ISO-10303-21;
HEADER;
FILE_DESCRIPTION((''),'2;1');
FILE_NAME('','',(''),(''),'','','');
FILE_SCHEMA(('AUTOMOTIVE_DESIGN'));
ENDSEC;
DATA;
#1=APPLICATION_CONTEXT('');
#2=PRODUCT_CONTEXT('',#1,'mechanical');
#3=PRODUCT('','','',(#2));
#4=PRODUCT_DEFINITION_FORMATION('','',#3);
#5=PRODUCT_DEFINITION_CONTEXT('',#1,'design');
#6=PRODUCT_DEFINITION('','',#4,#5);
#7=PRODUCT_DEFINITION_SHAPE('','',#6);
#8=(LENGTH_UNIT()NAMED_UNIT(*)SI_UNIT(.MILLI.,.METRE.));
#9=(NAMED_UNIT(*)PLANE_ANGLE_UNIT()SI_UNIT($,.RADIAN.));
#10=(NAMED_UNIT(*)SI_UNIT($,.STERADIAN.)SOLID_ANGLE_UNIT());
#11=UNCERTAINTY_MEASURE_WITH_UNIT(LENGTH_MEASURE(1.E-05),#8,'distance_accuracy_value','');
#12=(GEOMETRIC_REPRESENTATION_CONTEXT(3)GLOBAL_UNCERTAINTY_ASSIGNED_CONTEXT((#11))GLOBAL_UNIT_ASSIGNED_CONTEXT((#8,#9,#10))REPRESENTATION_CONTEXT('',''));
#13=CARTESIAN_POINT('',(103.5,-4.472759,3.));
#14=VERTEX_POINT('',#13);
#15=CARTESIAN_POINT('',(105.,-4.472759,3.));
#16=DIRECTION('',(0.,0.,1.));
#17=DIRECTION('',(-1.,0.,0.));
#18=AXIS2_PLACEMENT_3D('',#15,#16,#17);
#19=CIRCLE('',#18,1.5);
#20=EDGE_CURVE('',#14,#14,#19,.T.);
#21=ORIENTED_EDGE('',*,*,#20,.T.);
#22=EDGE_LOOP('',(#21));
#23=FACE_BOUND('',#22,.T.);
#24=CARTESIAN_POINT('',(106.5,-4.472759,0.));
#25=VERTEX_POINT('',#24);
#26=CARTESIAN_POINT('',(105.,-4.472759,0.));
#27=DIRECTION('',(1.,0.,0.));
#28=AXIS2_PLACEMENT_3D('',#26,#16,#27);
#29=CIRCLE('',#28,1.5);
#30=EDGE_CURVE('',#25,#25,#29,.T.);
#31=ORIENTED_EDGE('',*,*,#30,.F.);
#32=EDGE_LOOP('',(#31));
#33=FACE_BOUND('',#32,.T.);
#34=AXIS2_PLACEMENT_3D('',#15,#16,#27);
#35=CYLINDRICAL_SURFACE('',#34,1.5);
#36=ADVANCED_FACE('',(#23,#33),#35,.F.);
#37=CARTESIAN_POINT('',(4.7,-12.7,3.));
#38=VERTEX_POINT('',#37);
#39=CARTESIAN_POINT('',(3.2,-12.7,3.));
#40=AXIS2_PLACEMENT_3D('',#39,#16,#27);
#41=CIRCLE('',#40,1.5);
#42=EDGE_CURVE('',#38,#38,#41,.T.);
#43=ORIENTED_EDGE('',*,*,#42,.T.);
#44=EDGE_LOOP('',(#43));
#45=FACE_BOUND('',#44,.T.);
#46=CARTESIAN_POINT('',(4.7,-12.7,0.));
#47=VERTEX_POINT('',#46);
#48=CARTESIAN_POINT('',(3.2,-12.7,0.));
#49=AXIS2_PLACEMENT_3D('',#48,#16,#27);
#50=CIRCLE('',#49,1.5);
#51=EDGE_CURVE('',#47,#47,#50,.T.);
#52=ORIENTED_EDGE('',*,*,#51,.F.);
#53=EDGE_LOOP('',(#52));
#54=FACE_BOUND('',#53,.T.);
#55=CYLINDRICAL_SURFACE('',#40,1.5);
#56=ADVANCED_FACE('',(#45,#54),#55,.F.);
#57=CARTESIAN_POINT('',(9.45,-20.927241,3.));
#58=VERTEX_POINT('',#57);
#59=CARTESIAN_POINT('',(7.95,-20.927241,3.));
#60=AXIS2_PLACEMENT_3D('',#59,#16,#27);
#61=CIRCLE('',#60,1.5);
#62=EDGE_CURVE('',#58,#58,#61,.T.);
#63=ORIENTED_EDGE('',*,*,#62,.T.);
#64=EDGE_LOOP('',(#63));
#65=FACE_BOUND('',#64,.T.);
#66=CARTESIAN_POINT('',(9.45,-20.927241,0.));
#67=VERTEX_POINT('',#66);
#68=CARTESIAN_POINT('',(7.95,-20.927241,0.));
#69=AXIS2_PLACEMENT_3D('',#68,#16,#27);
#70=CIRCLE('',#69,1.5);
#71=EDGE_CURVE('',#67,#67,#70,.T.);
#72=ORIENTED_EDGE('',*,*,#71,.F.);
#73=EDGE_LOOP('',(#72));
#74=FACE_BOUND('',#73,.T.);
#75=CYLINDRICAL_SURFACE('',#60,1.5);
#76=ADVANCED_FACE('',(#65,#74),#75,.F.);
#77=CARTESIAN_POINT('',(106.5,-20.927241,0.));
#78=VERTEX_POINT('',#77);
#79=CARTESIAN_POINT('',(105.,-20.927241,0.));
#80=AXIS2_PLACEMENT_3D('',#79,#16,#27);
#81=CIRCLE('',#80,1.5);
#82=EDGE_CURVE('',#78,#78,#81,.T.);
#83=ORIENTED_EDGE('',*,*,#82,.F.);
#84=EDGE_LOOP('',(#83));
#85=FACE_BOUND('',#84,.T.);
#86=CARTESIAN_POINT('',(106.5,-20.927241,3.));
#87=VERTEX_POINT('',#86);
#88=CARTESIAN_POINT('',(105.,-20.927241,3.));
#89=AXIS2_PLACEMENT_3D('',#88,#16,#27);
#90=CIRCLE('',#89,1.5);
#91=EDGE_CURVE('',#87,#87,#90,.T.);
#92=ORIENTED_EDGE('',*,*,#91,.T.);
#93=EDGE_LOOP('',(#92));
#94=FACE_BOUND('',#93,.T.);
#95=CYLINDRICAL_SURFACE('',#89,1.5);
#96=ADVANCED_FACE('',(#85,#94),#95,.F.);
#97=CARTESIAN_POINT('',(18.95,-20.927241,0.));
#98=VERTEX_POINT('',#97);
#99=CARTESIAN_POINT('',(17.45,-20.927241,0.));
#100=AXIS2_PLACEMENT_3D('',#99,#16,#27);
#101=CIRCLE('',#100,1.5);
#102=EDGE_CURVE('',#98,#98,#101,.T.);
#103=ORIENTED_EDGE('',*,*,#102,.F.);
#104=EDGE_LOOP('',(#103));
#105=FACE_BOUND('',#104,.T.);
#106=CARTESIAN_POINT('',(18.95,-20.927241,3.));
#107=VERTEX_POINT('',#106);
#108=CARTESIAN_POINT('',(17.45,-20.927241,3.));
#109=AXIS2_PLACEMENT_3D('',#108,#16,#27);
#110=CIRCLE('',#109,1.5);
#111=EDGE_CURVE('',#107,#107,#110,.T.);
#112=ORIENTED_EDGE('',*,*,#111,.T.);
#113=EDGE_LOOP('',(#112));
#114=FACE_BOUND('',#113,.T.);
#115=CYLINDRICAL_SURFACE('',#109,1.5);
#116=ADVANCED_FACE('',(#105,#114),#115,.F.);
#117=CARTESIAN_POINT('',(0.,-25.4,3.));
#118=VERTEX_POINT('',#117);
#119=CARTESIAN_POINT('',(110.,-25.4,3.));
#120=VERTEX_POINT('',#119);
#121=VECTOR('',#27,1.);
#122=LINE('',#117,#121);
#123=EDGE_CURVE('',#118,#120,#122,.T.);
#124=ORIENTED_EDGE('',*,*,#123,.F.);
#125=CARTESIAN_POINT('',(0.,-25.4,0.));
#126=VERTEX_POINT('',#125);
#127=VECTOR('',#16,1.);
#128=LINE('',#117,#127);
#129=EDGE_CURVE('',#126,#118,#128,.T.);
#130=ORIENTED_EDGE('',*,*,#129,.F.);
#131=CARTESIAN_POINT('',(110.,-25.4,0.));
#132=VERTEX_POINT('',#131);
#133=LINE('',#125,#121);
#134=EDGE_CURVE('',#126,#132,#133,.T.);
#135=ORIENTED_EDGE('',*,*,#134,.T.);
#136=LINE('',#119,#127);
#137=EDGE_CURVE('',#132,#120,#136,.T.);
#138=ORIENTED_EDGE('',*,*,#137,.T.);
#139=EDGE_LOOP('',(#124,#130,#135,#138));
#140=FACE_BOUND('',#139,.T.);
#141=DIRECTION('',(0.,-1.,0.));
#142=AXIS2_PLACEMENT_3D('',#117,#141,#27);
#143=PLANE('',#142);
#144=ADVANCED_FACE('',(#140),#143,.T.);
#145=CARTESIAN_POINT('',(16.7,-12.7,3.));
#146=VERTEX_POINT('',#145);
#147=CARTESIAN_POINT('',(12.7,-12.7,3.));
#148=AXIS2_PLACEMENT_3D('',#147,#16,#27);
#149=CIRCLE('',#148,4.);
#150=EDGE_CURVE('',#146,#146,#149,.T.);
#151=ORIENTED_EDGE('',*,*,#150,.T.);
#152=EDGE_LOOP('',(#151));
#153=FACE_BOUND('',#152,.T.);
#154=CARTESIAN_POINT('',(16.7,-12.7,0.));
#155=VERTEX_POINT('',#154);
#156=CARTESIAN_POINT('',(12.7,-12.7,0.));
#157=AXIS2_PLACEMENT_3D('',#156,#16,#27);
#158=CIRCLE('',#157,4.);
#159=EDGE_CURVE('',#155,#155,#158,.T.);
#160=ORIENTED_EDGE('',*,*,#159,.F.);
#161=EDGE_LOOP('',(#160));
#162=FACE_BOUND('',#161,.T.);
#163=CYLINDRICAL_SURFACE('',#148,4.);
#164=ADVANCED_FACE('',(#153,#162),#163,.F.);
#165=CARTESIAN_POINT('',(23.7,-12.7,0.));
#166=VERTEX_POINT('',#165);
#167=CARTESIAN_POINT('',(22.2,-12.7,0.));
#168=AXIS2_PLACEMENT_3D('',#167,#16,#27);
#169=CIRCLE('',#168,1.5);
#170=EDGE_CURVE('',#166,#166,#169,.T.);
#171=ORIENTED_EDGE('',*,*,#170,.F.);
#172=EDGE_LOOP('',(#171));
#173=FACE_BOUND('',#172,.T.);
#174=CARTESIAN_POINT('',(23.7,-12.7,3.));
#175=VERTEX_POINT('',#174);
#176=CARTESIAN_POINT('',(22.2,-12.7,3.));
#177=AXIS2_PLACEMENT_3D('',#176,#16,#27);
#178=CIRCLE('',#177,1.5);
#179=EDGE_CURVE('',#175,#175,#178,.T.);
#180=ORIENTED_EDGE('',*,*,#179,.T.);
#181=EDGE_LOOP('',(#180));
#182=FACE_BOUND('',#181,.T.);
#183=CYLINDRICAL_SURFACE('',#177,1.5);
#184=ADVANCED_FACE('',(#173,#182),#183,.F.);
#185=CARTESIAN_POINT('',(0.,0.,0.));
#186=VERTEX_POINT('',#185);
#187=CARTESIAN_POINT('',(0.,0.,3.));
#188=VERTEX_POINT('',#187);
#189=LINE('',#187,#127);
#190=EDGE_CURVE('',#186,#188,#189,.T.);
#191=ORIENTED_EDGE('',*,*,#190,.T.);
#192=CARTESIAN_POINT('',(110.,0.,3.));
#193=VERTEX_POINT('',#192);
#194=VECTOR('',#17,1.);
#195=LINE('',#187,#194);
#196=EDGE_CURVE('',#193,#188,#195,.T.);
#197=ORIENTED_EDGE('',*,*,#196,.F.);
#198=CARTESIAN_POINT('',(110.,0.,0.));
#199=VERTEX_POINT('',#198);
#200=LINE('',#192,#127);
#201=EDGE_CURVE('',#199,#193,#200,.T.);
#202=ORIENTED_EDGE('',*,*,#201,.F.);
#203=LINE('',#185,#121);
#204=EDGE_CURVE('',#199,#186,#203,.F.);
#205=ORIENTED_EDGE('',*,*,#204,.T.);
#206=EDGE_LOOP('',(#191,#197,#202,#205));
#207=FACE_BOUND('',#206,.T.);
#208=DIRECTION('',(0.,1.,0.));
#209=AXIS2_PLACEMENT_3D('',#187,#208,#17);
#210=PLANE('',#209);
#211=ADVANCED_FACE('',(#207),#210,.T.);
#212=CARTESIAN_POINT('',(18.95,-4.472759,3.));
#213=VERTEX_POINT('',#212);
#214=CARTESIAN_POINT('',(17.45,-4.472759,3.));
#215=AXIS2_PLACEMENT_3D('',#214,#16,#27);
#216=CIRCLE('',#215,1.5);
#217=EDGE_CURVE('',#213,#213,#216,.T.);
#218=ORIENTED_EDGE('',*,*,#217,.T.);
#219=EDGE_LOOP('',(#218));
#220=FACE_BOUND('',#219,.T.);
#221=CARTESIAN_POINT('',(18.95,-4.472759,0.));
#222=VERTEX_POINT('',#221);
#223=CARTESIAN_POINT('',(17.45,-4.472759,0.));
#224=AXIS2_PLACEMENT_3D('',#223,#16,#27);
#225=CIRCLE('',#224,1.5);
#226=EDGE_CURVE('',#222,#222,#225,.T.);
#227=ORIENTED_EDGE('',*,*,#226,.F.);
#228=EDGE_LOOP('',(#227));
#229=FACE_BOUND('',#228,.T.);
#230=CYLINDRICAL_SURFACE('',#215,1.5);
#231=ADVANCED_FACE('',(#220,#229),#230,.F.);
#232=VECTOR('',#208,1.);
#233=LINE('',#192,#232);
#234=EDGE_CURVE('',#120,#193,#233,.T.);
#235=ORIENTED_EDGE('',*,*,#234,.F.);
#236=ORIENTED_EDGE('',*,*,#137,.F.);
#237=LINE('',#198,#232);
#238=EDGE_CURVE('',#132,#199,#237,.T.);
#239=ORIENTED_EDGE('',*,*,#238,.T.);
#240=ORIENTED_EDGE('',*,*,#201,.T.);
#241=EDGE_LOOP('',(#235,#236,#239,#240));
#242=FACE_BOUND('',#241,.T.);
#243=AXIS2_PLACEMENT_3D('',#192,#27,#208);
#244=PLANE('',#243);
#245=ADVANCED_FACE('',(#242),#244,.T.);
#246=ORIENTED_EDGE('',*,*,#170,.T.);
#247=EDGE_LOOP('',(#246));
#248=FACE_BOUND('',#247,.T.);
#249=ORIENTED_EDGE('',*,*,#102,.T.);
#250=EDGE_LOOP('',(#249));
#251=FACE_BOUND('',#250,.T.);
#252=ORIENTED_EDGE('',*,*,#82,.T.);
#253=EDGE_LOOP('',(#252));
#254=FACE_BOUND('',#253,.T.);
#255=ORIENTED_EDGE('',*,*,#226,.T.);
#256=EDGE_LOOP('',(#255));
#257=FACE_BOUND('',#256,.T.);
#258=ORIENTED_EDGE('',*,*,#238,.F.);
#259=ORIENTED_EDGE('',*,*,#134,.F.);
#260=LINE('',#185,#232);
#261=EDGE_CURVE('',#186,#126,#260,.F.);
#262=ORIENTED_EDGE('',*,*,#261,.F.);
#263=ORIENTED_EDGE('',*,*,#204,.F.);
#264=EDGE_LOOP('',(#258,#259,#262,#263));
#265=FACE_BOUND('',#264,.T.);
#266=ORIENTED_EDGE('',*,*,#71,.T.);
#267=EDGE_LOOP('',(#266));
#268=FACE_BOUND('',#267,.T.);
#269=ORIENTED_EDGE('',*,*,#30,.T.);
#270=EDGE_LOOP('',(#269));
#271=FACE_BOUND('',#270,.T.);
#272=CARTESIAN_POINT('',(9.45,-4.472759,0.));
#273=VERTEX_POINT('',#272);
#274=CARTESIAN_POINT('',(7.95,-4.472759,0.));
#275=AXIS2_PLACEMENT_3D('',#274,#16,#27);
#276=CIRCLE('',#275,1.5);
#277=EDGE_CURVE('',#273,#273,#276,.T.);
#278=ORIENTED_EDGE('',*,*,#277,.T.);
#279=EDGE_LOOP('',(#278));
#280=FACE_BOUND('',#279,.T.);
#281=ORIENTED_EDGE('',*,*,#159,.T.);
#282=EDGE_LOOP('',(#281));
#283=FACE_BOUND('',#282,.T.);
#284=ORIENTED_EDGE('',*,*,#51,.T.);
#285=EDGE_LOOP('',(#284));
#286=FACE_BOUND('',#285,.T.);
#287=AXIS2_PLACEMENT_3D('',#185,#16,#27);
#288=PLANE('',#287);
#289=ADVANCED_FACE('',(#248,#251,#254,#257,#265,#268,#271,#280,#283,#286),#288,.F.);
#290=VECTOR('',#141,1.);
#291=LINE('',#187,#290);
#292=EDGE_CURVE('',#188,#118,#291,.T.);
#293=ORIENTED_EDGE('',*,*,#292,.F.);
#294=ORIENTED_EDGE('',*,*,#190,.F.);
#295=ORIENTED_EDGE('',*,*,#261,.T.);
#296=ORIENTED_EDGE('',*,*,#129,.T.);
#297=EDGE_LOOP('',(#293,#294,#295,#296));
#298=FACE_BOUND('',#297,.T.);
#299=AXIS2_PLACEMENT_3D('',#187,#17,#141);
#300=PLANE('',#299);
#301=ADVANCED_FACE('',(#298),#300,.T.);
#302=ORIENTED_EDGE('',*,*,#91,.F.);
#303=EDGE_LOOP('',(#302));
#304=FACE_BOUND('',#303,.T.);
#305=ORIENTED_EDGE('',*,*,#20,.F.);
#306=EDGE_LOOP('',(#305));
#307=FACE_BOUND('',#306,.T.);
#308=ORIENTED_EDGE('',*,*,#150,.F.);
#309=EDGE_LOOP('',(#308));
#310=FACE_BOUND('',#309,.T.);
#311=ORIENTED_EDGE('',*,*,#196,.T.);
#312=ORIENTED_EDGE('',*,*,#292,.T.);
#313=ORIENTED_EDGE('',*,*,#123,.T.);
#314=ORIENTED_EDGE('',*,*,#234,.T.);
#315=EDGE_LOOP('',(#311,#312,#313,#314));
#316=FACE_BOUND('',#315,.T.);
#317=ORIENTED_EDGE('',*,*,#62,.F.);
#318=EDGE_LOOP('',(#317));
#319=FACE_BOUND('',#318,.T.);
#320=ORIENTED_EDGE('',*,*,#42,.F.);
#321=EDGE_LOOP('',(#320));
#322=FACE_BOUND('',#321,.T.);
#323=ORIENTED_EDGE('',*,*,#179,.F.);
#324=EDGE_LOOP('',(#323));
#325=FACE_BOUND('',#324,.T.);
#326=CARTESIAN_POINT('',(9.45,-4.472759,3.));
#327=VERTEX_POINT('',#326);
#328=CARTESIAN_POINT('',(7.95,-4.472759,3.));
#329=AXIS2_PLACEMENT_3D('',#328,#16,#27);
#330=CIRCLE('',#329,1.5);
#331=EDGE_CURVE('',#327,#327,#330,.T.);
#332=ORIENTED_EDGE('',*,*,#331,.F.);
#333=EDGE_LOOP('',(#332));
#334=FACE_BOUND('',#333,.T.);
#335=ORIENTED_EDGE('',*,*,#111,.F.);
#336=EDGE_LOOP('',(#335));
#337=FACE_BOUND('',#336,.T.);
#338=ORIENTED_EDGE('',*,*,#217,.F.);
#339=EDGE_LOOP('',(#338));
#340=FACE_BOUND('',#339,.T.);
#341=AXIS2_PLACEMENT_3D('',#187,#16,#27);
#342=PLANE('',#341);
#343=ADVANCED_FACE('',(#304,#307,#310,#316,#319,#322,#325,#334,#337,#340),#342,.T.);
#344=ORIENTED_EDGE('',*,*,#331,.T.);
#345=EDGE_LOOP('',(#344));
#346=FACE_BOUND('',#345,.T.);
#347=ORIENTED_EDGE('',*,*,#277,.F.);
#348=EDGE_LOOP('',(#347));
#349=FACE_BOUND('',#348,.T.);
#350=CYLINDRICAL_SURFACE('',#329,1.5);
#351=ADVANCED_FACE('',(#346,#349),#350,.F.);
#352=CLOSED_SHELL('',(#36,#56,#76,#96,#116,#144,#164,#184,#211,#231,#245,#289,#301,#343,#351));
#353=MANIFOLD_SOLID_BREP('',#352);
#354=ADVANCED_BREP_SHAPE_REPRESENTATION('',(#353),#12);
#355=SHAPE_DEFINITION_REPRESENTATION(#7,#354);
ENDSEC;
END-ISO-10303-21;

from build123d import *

# Parameters (mm, degrees)
SKETCH1_W           = 110
SKETCH1_H           = 25.4
SKETCH1_R           = 1.5
SKETCH1_R_2         = 4
BOSS_EXTRUDE1_DEPTH = 3


with BuildPart() as part:
    # Sketch1 → Boss-Extrude1 (new body)
    with BuildSketch(Plane.XY):
        with Locations((55, -12.7)):
            Rectangle(SKETCH1_W, SKETCH1_H)
        with Locations((3.2, -12.7)):
            Circle(SKETCH1_R, mode=Mode.SUBTRACT)
        with Locations((7.95, -4.472758664)):
            Circle(SKETCH1_R, mode=Mode.SUBTRACT)
        with Locations((17.45, -4.472758664)):
            Circle(SKETCH1_R, mode=Mode.SUBTRACT)
        with Locations((22.2, -12.7)):
            Circle(SKETCH1_R, mode=Mode.SUBTRACT)
        with Locations((17.45, -20.927241336)):
            Circle(SKETCH1_R, mode=Mode.SUBTRACT)
        with Locations((7.95, -20.927241336)):
            Circle(SKETCH1_R, mode=Mode.SUBTRACT)
        with Locations((12.7, -12.7)):
            Circle(SKETCH1_R_2, mode=Mode.SUBTRACT)
        with Locations(Location((105, -4.472758664, 0), (0, 0, 180))):
            Circle(SKETCH1_R, mode=Mode.SUBTRACT)
        with Locations((105, -20.927241336)):
            Circle(SKETCH1_R, mode=Mode.SUBTRACT)
    extrude(amount=BOSS_EXTRUDE1_DEPTH)


solid = part.part
